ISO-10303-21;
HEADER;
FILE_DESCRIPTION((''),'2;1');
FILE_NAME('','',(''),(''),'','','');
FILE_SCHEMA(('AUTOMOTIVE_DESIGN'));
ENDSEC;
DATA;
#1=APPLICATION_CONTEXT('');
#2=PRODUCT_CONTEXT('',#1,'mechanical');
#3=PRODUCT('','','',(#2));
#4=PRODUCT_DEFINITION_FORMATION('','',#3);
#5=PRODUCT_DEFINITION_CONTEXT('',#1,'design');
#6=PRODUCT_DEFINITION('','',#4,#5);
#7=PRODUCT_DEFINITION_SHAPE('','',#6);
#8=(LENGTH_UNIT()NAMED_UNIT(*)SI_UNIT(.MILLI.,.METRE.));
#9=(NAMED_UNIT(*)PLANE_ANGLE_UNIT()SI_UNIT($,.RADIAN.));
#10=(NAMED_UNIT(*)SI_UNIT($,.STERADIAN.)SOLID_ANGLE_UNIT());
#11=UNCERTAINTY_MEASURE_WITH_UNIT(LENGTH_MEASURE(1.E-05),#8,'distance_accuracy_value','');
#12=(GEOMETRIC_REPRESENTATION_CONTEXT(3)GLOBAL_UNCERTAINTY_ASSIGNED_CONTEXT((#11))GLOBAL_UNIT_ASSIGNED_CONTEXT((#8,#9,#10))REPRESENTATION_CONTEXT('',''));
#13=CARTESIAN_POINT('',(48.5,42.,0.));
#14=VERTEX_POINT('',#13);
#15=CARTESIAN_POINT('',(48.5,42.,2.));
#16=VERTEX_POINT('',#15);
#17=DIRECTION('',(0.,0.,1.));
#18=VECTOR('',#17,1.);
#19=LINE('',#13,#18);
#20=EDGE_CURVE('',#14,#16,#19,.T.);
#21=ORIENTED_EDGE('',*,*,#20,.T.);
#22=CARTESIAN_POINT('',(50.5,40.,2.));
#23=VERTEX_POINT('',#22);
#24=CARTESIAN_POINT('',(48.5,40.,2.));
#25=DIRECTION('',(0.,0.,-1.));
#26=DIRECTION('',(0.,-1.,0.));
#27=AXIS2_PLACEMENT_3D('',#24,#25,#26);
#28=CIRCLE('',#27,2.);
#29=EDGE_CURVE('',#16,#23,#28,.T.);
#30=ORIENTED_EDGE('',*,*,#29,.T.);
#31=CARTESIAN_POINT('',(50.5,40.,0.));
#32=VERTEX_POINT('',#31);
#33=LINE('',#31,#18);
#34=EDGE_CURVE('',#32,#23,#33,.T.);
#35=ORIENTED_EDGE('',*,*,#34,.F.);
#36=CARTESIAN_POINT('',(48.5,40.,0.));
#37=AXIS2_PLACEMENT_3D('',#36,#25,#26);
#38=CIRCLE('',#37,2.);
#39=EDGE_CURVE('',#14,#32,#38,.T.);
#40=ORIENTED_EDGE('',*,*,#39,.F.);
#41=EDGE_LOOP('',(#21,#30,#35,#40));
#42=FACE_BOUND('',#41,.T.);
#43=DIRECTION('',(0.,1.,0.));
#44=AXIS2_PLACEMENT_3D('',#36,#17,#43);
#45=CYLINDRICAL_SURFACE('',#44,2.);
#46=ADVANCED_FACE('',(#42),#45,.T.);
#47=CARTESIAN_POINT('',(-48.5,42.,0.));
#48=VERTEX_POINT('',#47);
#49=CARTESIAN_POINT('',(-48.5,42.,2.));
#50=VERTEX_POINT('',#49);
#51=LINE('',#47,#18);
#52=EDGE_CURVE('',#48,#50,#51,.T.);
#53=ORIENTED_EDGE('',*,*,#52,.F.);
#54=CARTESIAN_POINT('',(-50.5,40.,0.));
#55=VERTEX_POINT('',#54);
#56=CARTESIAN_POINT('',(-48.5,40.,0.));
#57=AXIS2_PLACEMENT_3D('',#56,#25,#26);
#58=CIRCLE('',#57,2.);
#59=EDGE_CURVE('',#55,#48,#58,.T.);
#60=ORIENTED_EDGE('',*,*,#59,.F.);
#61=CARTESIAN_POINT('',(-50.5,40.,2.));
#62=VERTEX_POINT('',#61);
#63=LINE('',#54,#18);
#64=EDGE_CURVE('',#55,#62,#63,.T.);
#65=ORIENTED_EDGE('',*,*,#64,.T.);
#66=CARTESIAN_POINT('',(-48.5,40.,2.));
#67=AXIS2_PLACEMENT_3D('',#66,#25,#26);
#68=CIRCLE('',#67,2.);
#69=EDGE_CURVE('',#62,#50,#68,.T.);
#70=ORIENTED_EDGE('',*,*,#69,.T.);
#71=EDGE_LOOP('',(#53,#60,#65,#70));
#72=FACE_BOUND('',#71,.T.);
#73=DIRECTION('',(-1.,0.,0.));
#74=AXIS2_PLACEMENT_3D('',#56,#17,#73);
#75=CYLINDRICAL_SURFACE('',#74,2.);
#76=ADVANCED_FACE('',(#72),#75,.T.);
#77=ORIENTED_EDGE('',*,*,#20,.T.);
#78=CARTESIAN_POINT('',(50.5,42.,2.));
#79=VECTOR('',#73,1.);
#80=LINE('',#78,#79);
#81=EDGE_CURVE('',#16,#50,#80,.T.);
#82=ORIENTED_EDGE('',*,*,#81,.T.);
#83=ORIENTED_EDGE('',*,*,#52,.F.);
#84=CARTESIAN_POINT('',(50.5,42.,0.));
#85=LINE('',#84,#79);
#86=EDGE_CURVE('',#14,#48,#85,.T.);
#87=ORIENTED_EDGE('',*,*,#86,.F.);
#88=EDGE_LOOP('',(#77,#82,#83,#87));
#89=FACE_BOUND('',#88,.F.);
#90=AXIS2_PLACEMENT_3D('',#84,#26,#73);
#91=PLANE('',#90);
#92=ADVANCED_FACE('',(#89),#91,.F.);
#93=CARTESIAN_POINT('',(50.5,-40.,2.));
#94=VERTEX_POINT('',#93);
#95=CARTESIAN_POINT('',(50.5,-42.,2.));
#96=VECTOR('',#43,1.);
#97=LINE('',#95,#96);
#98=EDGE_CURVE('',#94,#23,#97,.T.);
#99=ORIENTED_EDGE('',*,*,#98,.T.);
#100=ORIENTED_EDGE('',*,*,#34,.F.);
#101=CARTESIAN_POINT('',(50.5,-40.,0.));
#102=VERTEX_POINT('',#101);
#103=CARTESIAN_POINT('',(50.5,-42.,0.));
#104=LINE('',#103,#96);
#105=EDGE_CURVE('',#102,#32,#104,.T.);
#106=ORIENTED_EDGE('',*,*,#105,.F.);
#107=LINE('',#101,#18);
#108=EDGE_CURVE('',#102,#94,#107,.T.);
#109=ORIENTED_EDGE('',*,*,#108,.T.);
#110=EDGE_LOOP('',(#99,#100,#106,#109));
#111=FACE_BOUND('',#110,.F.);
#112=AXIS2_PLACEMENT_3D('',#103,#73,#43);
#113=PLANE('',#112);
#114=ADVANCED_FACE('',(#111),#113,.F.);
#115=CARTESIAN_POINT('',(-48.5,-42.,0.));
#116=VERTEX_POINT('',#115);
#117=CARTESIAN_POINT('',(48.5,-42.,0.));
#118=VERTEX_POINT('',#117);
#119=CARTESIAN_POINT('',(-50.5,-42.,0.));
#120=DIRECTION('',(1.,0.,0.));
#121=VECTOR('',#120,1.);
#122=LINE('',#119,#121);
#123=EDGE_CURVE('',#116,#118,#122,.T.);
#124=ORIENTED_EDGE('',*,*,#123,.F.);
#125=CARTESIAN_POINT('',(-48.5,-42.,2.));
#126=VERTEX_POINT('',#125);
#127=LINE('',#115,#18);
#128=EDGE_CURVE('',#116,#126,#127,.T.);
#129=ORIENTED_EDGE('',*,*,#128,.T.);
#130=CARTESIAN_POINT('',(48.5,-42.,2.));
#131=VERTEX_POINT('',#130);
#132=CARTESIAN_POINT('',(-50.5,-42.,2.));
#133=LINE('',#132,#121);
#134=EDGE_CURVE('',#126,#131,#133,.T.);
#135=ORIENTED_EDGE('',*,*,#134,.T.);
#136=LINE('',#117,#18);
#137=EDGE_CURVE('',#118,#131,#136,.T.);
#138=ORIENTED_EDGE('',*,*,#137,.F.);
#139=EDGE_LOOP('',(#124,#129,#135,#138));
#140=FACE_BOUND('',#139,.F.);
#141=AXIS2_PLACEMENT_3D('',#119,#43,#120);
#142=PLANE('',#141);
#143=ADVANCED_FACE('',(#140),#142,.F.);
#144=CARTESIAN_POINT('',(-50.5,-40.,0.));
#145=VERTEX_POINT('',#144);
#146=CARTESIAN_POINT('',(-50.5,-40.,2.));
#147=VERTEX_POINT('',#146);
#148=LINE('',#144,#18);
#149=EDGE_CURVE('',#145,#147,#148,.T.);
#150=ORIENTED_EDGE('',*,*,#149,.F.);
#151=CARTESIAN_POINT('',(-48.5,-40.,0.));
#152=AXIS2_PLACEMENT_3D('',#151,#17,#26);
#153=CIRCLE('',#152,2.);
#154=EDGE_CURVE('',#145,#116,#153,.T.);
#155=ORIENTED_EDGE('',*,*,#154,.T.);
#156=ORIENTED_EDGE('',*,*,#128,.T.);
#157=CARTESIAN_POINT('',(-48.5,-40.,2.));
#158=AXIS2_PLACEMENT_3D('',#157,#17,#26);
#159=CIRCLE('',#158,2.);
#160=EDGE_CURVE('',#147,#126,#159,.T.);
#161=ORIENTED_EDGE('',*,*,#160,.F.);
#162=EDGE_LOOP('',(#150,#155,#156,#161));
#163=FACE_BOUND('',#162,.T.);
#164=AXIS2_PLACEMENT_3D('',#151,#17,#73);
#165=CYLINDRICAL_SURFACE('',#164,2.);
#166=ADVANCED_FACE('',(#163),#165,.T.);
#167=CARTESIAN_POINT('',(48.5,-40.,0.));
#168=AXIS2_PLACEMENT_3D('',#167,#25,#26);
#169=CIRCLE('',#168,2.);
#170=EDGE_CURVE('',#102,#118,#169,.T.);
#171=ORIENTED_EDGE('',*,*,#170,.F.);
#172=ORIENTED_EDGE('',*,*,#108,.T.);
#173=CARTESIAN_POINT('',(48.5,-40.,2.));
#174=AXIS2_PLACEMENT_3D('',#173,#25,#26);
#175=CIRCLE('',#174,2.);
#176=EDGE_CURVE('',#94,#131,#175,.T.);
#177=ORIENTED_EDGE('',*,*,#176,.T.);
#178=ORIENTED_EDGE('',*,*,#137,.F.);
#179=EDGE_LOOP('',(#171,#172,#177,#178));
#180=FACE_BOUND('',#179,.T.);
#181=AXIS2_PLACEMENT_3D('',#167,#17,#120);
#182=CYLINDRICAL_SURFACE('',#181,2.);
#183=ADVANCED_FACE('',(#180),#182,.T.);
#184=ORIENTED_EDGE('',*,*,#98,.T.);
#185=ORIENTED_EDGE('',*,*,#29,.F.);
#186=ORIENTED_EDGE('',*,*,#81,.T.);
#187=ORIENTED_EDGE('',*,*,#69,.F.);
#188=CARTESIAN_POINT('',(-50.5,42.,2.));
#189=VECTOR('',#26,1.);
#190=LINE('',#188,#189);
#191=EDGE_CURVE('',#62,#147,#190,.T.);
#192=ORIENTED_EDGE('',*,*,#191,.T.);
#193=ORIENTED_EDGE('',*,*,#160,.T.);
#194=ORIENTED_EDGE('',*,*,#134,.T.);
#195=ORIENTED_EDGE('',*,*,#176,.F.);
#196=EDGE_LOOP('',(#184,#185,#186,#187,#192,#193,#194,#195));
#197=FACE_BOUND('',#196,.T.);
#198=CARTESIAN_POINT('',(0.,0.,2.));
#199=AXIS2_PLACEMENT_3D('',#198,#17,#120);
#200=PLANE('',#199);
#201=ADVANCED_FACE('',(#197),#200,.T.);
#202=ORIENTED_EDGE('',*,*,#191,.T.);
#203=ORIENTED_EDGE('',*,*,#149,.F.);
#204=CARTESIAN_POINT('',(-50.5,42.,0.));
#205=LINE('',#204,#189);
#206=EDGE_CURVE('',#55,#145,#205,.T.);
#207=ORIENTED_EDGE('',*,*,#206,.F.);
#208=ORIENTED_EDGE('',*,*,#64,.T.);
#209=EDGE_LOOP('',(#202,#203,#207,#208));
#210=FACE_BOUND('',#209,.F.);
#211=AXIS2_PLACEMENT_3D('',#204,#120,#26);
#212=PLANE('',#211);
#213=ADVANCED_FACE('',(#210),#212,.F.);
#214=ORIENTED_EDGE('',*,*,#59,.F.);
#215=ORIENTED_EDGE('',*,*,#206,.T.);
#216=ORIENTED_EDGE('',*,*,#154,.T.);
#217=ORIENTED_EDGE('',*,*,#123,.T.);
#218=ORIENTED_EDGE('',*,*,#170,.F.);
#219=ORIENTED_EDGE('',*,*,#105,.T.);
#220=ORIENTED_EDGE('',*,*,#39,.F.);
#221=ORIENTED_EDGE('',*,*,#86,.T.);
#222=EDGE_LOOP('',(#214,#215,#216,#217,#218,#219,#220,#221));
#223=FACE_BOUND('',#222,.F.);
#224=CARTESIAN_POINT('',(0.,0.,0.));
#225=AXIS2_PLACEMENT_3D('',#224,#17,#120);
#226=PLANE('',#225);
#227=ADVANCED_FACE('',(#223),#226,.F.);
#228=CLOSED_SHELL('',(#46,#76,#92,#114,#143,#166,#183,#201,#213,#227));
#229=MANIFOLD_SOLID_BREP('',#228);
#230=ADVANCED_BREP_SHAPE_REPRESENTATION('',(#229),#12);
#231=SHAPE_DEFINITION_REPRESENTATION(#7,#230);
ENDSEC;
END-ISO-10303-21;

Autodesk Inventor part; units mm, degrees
ref_plane "YZ Plane" through (0, 0, 0) normal (1, 0, 0) x (0, 1, 0)
ref_plane "XZ Plane" through (0, 0, 0) normal (0, 1, 0) x (-1, 0, 0)
ref_plane "XY Plane" through (0, 0, 0) normal (0, 0, 1) x (1, 0, 0)
sketch "Sketch1" plane through (0, 0, 0) normal (0, 0, 1) x (1, 0, 0)
  line L0 (-50.5, -42) -> (50.5, -42)
  line L1 (50.5, -42) -> (50.5, 42)
  line L2 (50.5, 42) -> (-50.5, 42)
  line L3 (-50.5, 42) -> (-50.5, -42)
  line L4 (-50.5, -42) -> (50.5, 42) construction
  line L5 (50.5, -42) -> (-50.5, 42) construction
  point P0 (0, 0)
  dimension "d154" = 101
  dimension "d155" = 84
extrude "Plate5" add sketch "Sketch1" along normal blind 2
fillet "Corner Round1" radius 2 4 edges at (50.5, 42, 1) (50.5, -42, 1) (-50.5, -42, 1) (-50.5, 42, 1)
sketch "Sketch11" plane through (-50.5, -22, -28) normal (1, 0, 0) x (0, 0, -1)
  line L0 (-25.25, 44) -> (-25.25, 0) construction
  line L1 (0, 0) -> (-25.25, 0) construction
  line L2 (0, 0) -> (0, 44) construction
  line L3 (0, 44) -> (-25.25, 44) construction
  circle A0 centre (-10, 22) radius 5.5
  point P0 (-28, 22)
  point P1 (0, 22)
  dimension "d192" = 11
  dimension "d193" = 10
cut "Cut3" [suppressed]
feature "Corner Round3" [suppressed]
sketch "Sketch10" plane through (-52.5, 40, 2) normal (1, 0, 0) x (0, 1, 0)
  line L0 (-80, 0) -> (0, 0)
  line L1 (0, 0) -> (0, -30)
  line L2 (0, -30) -> (-80, -30)
  line L3 (-80, -30) -> (-80, 0)
properties part number "TKS 3524 FDS diam way cup" material "Stainless Steel"
